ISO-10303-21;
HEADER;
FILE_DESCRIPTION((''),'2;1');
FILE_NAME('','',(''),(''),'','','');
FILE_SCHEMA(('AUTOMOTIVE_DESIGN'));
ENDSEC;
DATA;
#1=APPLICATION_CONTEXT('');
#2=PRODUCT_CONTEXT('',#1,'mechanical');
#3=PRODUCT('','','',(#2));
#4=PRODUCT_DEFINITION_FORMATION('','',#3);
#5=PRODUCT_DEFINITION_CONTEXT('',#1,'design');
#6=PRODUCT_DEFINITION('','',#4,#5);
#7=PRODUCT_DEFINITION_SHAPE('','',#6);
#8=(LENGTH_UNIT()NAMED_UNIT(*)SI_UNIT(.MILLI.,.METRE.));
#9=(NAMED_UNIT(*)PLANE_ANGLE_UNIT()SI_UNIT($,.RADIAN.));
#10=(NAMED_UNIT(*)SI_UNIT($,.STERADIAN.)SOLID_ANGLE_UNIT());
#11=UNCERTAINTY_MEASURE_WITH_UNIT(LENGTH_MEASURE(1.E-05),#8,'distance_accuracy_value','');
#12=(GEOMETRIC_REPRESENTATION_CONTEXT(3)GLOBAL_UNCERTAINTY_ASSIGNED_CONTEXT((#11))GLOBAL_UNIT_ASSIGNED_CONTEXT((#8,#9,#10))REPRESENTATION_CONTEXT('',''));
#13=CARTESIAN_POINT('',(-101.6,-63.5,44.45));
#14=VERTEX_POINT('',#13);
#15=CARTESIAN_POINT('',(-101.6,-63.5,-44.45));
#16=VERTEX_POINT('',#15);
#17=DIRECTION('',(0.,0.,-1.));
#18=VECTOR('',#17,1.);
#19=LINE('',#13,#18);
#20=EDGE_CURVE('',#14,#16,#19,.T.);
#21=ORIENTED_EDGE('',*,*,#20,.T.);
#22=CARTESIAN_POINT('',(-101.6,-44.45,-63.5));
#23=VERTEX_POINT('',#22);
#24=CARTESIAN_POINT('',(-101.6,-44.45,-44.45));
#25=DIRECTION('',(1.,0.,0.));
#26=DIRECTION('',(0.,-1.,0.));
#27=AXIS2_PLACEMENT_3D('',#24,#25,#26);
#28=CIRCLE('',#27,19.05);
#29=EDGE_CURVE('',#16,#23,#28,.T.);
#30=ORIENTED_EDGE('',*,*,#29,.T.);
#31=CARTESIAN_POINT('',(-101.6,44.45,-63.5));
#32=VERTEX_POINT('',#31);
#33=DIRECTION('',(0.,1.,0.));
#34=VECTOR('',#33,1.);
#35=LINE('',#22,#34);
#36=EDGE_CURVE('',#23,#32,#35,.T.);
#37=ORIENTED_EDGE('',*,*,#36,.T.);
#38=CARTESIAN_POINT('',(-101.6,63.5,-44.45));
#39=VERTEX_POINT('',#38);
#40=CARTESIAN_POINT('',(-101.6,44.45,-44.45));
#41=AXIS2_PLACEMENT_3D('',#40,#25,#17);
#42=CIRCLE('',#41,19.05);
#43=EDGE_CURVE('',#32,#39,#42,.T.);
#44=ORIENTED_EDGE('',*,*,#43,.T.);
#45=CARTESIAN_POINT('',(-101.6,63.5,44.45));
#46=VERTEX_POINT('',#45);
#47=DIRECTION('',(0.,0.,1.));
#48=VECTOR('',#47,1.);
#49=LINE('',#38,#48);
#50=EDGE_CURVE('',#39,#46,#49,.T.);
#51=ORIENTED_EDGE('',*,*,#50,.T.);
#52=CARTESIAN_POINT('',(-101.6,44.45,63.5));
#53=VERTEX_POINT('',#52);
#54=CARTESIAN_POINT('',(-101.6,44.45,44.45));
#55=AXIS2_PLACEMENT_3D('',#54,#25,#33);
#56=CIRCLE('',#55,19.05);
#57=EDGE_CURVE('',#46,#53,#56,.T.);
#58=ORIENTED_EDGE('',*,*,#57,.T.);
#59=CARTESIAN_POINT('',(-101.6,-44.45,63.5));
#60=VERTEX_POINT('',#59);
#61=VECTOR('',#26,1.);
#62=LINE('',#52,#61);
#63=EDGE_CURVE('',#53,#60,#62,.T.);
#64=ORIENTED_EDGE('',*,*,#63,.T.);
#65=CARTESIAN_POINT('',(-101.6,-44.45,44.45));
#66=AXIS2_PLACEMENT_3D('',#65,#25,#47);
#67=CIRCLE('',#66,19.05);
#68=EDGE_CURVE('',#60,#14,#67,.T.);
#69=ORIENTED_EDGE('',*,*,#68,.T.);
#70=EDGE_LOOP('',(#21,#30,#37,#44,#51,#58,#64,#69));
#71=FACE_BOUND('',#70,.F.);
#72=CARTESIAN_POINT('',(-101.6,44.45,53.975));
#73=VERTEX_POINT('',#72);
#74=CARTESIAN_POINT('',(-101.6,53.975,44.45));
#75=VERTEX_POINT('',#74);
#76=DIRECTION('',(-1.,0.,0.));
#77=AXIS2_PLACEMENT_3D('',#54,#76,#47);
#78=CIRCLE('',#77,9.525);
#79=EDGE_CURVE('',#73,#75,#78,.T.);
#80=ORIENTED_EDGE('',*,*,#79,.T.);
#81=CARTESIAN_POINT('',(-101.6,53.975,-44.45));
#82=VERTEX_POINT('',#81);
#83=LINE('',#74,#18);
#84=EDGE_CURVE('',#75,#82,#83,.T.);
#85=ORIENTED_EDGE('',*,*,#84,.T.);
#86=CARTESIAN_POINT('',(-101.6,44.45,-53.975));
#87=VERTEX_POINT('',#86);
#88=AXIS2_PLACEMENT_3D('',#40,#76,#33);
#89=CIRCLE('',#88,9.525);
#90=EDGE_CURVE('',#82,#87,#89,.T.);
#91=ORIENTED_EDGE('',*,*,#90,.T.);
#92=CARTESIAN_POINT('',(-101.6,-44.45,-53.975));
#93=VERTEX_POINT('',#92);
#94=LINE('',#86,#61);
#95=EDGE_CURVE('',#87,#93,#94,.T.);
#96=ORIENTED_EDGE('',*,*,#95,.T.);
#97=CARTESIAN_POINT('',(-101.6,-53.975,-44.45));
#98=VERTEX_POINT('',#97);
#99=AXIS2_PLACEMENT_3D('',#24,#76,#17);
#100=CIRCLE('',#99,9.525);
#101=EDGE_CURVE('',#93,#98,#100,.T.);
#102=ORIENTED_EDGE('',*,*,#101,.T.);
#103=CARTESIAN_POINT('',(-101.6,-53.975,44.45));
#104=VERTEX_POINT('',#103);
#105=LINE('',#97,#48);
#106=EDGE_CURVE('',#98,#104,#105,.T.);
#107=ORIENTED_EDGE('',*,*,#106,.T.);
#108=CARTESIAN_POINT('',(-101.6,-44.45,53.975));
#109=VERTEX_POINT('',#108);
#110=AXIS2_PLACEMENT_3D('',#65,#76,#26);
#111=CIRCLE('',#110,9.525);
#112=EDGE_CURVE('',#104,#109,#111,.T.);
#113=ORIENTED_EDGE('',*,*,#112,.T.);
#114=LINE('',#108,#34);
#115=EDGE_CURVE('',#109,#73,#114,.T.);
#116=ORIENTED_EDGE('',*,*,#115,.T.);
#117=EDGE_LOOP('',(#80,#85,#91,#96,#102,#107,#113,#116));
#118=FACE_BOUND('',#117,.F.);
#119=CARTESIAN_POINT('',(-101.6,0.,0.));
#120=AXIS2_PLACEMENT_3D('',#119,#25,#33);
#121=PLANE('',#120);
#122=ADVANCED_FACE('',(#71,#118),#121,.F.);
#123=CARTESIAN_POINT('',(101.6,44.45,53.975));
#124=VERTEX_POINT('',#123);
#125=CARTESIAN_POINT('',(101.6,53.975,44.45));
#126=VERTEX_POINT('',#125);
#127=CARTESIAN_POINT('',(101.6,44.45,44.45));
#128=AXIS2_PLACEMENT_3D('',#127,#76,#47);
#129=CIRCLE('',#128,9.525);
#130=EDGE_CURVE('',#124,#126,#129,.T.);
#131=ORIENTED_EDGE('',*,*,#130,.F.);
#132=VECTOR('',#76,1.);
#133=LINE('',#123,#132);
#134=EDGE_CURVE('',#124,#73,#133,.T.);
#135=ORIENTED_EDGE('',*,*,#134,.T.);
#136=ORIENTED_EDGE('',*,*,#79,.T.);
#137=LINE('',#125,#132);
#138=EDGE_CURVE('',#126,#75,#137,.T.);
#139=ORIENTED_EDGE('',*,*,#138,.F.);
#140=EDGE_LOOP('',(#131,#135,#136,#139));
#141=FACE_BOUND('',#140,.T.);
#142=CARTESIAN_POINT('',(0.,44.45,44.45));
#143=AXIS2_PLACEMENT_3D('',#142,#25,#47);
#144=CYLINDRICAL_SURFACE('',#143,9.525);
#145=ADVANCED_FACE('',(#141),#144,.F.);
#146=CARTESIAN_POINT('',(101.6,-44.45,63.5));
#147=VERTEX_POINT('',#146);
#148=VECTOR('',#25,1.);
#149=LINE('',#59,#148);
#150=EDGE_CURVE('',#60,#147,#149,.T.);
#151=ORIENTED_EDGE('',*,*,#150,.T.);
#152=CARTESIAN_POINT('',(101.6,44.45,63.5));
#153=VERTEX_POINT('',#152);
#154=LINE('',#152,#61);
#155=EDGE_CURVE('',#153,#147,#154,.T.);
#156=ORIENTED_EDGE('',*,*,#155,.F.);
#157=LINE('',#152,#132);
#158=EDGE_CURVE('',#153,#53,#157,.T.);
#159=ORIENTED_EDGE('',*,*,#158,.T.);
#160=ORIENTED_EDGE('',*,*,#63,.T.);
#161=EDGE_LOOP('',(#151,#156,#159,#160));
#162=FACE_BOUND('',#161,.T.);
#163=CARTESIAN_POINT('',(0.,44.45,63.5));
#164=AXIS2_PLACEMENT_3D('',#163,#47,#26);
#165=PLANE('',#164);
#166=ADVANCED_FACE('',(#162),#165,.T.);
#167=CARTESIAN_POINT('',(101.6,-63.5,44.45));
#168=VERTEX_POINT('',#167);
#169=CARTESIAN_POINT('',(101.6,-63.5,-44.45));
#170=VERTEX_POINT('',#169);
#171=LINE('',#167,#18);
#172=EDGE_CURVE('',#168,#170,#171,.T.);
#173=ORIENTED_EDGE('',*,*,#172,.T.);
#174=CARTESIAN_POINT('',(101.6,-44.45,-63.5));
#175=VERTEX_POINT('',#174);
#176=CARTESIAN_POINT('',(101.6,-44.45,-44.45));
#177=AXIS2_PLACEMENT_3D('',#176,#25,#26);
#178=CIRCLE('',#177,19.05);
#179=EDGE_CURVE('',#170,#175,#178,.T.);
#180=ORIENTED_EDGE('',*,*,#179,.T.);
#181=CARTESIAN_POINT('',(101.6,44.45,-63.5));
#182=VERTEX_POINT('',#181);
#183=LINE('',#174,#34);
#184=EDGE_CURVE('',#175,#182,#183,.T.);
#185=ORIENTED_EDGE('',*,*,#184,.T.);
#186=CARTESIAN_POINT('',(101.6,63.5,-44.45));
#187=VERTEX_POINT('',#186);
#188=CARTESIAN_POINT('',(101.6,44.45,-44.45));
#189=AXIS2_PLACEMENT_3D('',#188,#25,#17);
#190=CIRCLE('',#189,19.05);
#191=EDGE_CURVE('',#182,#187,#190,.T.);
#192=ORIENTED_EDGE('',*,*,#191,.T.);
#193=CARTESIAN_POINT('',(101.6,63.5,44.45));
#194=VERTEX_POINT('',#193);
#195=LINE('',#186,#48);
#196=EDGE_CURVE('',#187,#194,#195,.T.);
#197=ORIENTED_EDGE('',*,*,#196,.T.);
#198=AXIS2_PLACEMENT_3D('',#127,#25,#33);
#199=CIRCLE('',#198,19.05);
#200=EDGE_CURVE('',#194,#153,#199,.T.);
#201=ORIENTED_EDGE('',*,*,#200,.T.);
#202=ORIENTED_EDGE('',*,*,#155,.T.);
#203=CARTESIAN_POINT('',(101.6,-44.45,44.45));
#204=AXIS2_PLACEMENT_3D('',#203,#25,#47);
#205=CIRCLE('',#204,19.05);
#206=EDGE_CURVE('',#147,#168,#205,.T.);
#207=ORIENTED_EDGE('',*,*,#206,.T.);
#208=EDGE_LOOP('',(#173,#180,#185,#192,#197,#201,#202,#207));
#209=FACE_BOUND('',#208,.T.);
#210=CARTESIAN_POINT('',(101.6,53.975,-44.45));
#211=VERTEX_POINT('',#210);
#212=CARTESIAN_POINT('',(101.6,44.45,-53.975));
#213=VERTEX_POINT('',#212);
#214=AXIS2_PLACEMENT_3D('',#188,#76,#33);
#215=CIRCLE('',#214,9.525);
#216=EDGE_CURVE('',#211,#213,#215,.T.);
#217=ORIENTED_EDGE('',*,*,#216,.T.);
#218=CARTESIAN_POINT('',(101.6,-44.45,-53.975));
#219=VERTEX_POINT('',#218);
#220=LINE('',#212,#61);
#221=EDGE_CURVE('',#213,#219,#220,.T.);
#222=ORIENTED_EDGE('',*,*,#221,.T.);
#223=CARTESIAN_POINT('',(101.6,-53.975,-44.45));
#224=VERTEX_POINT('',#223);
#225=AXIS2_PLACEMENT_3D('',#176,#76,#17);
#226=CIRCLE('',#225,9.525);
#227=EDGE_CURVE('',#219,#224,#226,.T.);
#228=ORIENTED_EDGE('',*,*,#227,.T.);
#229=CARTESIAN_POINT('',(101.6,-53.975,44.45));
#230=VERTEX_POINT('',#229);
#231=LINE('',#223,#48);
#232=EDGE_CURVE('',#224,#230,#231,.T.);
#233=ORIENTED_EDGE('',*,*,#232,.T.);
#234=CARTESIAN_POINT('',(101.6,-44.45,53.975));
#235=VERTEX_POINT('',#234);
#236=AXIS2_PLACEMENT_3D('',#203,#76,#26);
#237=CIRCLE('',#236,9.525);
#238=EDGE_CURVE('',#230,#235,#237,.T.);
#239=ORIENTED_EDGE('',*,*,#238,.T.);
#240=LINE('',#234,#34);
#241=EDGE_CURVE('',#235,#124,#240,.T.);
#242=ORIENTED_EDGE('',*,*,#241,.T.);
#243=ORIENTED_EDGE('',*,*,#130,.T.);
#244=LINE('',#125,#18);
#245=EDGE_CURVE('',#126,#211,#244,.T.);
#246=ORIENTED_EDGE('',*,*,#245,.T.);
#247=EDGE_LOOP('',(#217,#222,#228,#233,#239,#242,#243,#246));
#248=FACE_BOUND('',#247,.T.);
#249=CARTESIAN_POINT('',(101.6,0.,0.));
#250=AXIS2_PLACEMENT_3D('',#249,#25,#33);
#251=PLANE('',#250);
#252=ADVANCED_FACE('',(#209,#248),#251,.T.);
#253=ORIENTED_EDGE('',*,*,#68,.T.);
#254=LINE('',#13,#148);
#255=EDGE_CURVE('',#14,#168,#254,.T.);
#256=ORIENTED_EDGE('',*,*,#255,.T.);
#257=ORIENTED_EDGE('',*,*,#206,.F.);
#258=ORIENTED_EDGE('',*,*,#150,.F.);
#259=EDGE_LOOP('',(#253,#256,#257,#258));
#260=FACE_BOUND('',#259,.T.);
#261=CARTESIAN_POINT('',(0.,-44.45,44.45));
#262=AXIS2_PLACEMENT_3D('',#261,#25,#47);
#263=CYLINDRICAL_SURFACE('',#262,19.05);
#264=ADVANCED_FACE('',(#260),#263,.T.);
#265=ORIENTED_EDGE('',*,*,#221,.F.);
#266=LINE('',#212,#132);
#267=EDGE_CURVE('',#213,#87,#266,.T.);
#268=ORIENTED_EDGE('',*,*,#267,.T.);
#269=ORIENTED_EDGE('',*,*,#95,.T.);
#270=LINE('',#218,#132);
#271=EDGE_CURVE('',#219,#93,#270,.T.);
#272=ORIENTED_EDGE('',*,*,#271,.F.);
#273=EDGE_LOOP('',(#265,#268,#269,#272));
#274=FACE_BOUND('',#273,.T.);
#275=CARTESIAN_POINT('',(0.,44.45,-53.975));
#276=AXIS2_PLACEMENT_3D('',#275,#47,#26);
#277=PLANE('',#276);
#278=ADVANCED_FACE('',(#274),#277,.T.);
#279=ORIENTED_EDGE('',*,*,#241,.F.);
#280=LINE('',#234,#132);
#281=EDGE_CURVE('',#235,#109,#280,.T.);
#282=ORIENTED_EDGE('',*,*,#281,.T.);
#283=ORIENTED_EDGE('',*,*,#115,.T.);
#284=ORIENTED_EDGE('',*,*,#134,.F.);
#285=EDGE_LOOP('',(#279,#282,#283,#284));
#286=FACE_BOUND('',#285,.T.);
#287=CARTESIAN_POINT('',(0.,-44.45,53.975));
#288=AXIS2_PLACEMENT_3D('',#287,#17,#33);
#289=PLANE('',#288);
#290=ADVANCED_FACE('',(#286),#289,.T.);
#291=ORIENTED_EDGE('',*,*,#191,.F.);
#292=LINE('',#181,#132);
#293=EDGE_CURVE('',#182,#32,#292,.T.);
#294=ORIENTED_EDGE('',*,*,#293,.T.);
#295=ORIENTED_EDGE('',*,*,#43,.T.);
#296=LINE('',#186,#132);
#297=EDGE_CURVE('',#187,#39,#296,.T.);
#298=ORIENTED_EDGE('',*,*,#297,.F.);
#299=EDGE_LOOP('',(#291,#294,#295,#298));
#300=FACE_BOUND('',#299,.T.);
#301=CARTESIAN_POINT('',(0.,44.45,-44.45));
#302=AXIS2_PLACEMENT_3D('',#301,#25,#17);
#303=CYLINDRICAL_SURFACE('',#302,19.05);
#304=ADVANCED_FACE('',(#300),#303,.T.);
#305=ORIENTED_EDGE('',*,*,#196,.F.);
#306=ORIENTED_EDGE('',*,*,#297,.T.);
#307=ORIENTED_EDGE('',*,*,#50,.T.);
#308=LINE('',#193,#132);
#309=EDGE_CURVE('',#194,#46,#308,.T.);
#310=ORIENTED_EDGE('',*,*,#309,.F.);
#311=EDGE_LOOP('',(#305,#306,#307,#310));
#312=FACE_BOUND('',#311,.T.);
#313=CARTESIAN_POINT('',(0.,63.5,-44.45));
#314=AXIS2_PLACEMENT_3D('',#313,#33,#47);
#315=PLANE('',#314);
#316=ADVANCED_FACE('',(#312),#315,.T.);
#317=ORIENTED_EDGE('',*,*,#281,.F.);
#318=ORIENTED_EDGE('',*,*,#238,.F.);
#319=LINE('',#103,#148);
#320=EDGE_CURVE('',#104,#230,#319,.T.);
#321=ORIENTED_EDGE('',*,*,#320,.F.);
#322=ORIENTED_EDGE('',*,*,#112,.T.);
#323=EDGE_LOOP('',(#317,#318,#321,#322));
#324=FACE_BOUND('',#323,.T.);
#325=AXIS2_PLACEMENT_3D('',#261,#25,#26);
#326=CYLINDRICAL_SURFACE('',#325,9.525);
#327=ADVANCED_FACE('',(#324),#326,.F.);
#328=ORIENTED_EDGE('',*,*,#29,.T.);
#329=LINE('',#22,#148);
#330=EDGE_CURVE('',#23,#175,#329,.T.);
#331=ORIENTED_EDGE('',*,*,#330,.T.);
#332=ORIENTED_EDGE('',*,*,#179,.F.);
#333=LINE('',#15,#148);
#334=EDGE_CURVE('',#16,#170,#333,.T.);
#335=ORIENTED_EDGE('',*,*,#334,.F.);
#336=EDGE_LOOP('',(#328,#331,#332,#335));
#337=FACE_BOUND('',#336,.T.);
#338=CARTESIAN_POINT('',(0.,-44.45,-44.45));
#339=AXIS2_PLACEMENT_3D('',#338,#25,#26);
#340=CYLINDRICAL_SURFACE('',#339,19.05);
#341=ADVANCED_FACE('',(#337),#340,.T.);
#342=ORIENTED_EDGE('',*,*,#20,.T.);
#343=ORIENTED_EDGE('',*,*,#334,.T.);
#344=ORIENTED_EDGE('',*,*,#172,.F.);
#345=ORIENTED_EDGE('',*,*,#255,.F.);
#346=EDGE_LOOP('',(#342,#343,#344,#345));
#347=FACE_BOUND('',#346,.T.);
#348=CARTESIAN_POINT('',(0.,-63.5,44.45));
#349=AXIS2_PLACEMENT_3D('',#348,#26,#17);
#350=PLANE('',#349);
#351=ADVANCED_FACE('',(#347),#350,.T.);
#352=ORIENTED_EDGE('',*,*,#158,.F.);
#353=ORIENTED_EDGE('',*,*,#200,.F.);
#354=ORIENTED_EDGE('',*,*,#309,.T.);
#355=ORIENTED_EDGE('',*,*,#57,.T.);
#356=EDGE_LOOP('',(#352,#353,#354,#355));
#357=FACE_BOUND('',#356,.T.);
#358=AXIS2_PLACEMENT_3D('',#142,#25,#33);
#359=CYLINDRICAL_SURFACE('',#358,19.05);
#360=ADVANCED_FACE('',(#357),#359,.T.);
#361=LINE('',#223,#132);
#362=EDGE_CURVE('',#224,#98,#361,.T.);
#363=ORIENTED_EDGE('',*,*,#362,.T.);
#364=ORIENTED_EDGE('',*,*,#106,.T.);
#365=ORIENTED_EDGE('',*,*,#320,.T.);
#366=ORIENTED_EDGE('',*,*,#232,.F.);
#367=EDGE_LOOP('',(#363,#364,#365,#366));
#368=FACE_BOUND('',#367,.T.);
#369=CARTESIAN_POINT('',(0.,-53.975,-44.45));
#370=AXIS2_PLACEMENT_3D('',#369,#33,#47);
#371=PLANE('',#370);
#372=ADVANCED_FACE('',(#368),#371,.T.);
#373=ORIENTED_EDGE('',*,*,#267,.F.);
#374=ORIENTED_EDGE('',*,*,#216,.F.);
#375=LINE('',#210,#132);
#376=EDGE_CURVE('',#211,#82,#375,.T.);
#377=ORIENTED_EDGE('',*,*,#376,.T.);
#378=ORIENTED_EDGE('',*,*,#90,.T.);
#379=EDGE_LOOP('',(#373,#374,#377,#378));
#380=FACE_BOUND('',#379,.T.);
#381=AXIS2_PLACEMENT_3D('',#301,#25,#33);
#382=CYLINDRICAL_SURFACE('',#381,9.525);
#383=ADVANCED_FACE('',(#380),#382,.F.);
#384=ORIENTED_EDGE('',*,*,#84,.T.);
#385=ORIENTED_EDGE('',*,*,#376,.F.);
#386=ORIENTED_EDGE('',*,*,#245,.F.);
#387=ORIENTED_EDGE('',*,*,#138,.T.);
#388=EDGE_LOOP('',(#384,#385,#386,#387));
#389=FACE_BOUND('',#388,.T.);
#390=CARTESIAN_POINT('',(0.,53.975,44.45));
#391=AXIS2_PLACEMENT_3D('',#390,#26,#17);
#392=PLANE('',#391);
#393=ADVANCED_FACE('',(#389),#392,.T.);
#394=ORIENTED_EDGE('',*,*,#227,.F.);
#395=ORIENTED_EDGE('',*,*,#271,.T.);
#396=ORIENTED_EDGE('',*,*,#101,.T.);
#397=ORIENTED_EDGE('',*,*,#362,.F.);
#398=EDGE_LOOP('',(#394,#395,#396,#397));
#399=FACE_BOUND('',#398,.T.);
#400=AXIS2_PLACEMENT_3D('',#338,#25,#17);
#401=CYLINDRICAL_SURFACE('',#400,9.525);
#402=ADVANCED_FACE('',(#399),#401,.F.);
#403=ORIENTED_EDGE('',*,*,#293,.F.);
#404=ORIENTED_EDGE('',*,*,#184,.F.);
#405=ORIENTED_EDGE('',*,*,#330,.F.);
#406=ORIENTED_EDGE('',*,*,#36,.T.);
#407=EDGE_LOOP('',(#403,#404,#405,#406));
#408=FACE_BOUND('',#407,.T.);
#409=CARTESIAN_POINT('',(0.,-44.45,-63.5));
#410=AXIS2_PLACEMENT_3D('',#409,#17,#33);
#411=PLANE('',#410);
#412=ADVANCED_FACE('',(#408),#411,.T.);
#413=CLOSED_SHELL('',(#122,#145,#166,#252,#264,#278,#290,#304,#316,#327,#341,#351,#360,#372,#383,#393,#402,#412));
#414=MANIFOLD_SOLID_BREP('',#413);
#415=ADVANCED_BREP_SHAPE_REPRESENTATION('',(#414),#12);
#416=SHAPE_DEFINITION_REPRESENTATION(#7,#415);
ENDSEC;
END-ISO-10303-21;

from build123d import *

# Parameters (mm, degrees)
F2_DEPTH = 101.6


# Not quite as in the source:
# - a variable given as a bare number and used for a length is read in inches; the dataset says mm whatever the document's units were


with BuildPart() as f2:
    # F1 (on Right) → F2 (new body, symmetric)
    with BuildSketch(Plane.YZ):
        with BuildLine():
            Line((44.45, 63.5), (-44.45, 63.5))
            ThreePointArc((-44.45, 63.5), (-57.9203841816, 57.9203841816), (-63.5, 44.45))
            Line((-63.5, 44.45), (-63.5, -44.45))
            ThreePointArc((-63.5, -44.45), (-57.9203841816, -57.9203841816), (-44.45, -63.5))
            Line((-44.45, -63.5), (44.45, -63.5))
            ThreePointArc((44.45, -63.5), (57.9203841816, -57.9203841816), (63.5, -44.45))
            Line((63.5, -44.45), (63.5, 44.45))
            ThreePointArc((63.5, 44.45), (57.9203841816, 57.9203841816), (44.45, 63.5))
        make_face()
        with BuildLine():
            ThreePointArc((-53.975, 44.45), (-51.1851920908, 51.1851920908), (-44.45, 53.975))
            Line((-44.45, 53.975), (44.45, 53.975))
            ThreePointArc((44.45, 53.975), (51.1851920908, 51.1851920908), (53.975, 44.45))
            Line((53.975, 44.45), (53.975, -44.45))
            ThreePointArc((53.975, -44.45), (51.1851920908, -51.1851920908), (44.45, -53.975))
            Line((44.45, -53.975), (-44.45, -53.975))
            ThreePointArc((-44.45, -53.975), (-51.1851920908, -51.1851920908), (-53.975, -44.45))
            Line((-53.975, -44.45), (-53.975, 44.45))
        make_face(mode=Mode.SUBTRACT)
    extrude(amount=F2_DEPTH, both=True)


solid = f2.part
